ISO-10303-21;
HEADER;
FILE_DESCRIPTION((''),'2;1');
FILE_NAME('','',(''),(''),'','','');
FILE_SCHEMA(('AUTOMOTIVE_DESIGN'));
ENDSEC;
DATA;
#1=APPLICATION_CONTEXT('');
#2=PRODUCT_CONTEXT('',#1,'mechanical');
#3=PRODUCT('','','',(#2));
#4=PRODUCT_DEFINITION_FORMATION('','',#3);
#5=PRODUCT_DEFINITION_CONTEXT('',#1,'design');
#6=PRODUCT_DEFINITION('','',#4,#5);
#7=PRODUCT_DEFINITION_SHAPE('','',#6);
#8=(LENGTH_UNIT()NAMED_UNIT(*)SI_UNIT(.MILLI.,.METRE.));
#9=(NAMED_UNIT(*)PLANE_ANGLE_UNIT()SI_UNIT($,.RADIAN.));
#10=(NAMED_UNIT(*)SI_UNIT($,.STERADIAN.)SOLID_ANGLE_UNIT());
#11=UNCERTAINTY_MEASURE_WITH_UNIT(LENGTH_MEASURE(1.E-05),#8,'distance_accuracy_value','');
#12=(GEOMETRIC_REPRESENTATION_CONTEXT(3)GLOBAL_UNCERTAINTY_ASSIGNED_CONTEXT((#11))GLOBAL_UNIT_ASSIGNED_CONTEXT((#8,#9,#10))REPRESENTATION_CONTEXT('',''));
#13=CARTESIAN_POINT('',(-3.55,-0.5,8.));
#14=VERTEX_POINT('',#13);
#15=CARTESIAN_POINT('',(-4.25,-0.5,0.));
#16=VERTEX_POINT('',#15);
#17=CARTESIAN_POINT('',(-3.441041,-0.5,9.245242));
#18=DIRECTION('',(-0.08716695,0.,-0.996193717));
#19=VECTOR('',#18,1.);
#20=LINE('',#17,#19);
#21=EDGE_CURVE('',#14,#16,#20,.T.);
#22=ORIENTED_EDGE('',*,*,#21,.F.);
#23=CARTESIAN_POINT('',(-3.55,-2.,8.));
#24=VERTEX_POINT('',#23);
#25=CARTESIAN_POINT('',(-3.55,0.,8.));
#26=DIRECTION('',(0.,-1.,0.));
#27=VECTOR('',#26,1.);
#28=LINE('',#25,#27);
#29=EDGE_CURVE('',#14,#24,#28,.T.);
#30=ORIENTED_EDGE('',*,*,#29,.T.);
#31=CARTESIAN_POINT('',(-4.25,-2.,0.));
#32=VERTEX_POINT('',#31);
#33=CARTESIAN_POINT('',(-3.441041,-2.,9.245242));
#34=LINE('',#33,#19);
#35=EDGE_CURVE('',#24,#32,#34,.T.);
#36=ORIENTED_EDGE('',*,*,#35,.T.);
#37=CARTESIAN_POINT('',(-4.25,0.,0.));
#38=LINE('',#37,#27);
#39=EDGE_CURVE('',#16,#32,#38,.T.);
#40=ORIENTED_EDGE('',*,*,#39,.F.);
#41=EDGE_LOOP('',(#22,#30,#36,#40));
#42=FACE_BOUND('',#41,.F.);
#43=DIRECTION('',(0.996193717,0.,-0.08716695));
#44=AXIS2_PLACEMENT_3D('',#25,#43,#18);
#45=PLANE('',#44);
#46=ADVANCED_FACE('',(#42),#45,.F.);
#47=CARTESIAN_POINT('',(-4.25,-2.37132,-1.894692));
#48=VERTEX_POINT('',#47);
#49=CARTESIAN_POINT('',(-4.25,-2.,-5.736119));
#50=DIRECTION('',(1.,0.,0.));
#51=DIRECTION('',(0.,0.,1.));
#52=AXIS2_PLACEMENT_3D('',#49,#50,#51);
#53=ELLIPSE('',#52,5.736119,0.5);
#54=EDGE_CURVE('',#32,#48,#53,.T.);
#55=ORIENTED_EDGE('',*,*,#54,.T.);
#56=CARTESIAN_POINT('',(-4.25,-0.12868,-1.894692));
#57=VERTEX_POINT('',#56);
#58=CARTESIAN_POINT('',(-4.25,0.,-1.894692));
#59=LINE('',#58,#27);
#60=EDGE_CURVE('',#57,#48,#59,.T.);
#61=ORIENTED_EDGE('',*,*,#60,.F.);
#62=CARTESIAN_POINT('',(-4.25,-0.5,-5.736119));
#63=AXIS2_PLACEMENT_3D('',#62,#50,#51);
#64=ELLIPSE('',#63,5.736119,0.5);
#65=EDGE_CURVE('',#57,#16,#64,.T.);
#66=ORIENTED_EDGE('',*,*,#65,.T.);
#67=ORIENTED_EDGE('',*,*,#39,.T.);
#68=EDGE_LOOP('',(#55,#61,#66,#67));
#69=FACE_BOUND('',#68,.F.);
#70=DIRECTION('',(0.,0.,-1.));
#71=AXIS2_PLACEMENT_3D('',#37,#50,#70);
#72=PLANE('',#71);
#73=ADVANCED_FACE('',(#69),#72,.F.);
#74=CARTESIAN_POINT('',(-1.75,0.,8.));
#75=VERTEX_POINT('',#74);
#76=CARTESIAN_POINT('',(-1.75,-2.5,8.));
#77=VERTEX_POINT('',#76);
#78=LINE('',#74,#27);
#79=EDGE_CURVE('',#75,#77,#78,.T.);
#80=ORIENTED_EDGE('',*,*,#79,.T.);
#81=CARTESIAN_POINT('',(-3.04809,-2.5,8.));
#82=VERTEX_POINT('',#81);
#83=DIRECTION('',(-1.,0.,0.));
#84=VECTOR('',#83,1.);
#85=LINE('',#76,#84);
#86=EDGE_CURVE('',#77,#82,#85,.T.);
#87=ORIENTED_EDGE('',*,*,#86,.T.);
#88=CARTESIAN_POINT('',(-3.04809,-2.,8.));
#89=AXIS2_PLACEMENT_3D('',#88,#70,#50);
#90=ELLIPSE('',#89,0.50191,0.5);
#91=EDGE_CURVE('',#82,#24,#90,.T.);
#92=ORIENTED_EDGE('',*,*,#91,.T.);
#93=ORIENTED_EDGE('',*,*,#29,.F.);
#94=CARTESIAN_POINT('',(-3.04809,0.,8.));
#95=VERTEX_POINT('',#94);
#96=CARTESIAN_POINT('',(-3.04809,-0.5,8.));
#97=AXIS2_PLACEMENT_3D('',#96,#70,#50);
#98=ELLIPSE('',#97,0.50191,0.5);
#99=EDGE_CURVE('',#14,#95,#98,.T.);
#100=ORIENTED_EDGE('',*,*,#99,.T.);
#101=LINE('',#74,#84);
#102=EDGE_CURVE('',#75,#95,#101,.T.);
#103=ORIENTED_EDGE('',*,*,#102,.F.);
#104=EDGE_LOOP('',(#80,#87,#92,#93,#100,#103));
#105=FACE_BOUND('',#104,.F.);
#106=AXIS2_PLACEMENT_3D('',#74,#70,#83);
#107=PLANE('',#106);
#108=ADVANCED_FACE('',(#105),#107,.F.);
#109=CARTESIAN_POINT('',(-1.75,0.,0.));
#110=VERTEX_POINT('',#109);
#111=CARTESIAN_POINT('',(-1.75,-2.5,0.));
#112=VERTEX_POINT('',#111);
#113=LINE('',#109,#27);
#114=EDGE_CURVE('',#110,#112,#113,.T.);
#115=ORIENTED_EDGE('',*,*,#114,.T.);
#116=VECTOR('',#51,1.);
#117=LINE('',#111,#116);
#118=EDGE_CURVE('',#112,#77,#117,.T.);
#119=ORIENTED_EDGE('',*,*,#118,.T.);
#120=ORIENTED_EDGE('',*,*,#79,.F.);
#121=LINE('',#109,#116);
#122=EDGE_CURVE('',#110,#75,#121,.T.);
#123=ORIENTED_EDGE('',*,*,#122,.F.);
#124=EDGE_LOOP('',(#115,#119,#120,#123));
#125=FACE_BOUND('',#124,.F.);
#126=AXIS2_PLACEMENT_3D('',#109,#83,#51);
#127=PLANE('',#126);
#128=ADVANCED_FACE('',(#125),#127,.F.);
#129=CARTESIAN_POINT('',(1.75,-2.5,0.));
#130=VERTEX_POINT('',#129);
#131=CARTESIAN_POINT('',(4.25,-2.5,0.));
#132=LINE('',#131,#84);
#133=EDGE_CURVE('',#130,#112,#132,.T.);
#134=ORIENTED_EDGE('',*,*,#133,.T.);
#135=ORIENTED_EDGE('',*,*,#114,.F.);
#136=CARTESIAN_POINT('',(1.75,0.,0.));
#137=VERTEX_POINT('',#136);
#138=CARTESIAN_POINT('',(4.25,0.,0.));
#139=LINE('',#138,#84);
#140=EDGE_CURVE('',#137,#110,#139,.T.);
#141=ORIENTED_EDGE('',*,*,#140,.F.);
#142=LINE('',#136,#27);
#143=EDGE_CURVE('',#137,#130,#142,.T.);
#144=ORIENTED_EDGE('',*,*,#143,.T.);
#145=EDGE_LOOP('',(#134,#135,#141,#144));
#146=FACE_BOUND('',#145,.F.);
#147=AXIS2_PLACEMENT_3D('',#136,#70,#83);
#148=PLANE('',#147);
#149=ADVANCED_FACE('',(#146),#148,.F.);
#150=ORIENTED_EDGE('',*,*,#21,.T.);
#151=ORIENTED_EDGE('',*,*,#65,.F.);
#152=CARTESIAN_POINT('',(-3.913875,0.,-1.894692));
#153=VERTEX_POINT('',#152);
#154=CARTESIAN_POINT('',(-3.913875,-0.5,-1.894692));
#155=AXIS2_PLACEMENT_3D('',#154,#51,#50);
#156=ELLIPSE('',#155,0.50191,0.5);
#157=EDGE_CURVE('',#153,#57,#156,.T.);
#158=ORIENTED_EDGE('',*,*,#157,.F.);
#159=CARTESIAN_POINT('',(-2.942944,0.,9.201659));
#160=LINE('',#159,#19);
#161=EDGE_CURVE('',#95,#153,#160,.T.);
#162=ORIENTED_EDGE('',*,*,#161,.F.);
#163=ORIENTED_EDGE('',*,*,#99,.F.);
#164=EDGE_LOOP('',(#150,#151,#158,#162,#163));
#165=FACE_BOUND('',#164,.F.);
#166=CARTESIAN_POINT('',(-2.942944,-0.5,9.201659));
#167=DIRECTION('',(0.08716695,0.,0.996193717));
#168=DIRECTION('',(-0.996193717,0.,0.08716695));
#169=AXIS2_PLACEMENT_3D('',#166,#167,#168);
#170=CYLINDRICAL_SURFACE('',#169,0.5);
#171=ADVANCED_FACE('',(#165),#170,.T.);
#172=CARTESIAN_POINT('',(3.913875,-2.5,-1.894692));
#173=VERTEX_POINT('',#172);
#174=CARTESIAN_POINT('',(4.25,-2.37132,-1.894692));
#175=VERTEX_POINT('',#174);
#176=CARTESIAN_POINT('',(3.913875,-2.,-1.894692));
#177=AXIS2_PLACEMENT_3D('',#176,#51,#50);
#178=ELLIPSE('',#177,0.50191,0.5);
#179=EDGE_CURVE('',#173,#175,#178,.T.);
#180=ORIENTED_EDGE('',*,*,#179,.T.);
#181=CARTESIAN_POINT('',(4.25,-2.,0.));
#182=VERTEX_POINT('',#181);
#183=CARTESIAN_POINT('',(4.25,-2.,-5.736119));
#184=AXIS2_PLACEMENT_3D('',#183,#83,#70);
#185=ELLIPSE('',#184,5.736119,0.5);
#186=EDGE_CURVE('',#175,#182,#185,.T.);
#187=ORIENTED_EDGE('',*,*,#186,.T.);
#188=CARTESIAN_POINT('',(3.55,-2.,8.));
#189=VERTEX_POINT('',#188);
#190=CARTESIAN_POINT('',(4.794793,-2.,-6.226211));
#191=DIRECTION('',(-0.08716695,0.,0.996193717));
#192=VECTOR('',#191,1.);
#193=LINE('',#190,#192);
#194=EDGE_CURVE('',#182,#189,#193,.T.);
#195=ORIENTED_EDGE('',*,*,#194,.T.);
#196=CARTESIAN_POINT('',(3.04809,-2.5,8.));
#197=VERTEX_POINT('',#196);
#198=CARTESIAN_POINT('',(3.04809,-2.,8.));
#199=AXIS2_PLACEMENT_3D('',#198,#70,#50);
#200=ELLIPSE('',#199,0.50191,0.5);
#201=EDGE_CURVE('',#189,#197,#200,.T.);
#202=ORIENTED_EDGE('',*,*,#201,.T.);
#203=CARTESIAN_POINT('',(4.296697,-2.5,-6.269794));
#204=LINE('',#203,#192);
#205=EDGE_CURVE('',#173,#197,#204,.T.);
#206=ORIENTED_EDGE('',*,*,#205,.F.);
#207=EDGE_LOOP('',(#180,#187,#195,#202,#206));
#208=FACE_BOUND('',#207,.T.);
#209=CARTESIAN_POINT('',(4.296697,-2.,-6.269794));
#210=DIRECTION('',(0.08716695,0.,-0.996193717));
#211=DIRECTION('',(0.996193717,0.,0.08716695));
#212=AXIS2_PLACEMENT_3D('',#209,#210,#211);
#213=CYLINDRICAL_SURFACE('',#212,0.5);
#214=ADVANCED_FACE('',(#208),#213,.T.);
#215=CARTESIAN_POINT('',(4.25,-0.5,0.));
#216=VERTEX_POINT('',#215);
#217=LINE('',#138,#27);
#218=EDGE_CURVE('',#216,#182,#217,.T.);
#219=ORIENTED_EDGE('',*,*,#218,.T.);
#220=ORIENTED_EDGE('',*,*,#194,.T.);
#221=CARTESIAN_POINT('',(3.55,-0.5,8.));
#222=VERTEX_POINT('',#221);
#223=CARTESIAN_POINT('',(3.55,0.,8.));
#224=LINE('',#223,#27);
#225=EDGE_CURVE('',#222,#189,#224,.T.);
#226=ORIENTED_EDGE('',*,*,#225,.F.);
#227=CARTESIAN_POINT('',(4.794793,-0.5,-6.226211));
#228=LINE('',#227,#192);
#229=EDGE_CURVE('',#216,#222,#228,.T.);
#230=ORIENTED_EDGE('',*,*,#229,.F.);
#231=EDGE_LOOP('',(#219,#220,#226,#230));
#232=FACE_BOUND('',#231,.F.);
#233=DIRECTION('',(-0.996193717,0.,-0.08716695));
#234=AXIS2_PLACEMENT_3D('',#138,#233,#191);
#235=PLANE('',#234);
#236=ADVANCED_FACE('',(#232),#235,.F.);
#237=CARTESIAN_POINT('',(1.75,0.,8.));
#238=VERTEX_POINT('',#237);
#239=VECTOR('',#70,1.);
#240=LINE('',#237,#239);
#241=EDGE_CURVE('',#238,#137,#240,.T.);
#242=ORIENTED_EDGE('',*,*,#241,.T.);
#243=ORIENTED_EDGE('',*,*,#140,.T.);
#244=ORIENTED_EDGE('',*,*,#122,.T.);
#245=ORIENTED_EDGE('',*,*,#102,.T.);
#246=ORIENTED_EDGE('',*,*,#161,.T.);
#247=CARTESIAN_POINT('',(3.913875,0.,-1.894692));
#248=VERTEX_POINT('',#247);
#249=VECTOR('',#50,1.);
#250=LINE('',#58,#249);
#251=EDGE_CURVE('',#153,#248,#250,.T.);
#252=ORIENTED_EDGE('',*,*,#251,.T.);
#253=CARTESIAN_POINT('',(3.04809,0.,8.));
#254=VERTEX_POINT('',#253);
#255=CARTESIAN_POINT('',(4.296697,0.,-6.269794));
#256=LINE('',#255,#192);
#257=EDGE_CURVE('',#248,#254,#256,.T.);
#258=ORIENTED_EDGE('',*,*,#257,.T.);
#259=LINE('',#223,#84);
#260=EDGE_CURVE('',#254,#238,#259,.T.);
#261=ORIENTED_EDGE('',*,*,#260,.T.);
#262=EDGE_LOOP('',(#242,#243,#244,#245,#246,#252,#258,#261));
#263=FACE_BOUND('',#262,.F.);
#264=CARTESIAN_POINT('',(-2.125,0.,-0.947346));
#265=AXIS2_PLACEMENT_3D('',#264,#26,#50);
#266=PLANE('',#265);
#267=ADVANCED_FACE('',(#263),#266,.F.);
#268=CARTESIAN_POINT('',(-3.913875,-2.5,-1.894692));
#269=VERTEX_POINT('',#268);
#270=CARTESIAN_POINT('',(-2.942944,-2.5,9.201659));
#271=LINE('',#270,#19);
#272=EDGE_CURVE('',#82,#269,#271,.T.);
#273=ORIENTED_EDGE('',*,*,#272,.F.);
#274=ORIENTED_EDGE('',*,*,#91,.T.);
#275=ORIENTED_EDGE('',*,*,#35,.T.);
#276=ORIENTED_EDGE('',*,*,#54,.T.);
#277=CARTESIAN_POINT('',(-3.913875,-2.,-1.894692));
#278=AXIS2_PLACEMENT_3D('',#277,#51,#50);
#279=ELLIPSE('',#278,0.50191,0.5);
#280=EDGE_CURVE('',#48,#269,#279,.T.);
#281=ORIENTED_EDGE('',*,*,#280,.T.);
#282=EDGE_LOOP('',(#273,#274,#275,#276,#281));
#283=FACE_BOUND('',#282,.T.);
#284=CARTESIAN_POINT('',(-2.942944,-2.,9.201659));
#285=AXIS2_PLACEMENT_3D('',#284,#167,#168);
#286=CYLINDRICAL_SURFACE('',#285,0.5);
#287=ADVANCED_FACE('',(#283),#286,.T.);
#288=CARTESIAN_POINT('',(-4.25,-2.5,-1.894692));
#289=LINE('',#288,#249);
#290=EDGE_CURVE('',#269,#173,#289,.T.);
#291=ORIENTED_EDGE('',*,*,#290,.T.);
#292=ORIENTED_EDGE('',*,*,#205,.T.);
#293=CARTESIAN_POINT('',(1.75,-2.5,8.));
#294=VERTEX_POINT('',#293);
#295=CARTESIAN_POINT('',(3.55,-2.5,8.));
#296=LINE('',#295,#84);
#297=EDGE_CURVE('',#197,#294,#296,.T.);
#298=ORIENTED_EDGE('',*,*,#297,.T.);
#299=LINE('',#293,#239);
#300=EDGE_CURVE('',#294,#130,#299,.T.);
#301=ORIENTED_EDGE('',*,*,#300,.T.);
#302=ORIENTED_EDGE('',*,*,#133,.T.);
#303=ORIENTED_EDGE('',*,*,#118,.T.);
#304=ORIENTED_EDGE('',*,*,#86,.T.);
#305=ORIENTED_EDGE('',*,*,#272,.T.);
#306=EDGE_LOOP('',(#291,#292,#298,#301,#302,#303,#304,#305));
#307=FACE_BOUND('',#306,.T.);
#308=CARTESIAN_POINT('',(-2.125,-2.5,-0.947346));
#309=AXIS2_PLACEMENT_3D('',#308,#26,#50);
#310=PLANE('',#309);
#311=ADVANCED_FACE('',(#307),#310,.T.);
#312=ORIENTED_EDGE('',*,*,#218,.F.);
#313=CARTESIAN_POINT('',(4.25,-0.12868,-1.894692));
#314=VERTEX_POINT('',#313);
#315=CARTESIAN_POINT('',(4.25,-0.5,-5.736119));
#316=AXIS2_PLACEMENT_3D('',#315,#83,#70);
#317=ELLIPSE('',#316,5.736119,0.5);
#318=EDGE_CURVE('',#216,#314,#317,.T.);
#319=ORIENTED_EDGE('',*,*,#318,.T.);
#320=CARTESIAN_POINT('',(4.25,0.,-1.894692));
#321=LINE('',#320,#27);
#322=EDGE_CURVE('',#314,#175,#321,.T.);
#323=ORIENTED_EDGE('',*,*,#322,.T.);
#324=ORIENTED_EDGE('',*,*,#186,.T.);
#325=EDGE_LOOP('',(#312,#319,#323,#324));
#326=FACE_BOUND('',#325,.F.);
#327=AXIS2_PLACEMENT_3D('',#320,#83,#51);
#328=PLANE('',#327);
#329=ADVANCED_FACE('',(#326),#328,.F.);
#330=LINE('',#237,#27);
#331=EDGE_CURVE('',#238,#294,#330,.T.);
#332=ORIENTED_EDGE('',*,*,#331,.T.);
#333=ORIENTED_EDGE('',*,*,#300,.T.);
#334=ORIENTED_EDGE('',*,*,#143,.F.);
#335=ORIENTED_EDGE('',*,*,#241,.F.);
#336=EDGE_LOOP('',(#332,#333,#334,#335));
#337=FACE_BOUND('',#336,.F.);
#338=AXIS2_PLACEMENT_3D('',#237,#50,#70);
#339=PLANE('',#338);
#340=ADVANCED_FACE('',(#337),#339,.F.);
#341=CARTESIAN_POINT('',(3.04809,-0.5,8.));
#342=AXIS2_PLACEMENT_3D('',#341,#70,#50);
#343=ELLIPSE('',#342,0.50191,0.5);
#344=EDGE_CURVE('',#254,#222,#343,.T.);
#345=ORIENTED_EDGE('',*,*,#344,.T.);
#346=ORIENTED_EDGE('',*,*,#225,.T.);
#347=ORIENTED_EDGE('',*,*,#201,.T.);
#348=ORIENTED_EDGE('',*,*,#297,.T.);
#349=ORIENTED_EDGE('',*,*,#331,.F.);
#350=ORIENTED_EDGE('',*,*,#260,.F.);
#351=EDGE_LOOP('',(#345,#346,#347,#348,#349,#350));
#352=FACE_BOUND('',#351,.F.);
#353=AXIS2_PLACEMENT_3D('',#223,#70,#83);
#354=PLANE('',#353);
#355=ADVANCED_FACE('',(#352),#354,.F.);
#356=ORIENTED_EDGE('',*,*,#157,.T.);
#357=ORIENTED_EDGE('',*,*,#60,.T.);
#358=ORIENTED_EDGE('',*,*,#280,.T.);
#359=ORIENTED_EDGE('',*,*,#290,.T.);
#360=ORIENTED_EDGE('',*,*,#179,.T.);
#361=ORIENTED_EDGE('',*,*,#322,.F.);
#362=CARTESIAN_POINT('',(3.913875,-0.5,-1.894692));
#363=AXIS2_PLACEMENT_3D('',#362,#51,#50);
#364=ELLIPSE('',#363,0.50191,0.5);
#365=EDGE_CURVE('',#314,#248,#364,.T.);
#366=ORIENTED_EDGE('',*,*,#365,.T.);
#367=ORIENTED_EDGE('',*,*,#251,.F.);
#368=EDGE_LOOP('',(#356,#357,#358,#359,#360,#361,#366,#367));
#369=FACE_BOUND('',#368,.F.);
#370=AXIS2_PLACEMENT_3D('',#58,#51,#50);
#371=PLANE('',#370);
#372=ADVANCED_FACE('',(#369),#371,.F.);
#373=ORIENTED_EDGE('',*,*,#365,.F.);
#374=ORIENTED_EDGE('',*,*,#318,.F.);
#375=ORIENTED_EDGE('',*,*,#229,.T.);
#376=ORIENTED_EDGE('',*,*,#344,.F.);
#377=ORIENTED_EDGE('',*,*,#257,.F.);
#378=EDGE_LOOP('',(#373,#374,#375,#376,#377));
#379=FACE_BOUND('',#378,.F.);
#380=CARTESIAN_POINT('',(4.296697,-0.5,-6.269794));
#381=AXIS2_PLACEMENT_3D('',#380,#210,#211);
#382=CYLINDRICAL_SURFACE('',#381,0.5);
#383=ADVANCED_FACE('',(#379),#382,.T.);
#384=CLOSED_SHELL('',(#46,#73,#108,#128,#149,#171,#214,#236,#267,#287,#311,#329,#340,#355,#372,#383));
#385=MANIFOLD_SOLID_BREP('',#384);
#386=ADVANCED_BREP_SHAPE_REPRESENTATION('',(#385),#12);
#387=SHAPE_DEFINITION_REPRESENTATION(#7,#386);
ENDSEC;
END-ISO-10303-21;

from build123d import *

# Parameters (mm, degrees)
F1_DEPTH    = 2.5
F2_T1_DEPTH = 15.5305666052
F2_T3_DEPTH = 15.5305666052


# Not quite as in the source:
# - a fillet or chamfer that OpenCascade refuses, or shapes differently, is made with other operations: its cross-section is extruded or revolved along the edge and cut away or added


with BuildPart() as f1:
    # F0 (on Front) → F1 (new body)
    with BuildSketch(Plane.XZ):
        Polygon((0, -1.894692351), (0, 0), (-1.75, 0), (-4.25, 0), (-4.25, -1.894692351), align=None)
        Polygon((1.75, 0), (0, 0), (0, -1.894692351), (4.25, -1.894692351), (4.25, 0), align=None)
        Polygon((-4.25, 0), (-1.75, 0), (-1.75, 8), (-3.55, 8), align=None)
        Polygon((1.75, 8), (1.75, 0), (4.25, 0), (3.55, 8), align=None)
    extrude(amount=F1_DEPTH)

    # F2: fillet of radius 0.5 on 4 edges, made by hand

    # F2_s2 → F2_t1 (cut)
    with BuildSketch(Plane(origin=(0.5770852674, 0, -6.5952601994), x_dir=(0, 1, 0), z_dir=(-0.0871669503, 0, 0.9961937175))):
        with BuildLine():
            ThreePointArc((-2, -4.2338232994), (-2.3535533906, -4.08737669), (-2.5, -3.7338232994))
            Line((-2.5, -3.7338232994), (-2.5, -4.2338232994))
            Line((-2.5, -4.2338232994), (-2, -4.2338232994))
        make_face()
        with BuildLine():
            ThreePointArc((-0.5, -4.2338232994), (-0.1464466094, -4.08737669), (0, -3.7338232994))
            Line((0, -3.7338232994), (0, -4.2338232994))
            Line((0, -4.2338232994), (-0.5, -4.2338232994))
        make_face()
    extrude(amount=F2_T1_DEPTH, mode=Mode.SUBTRACT)

    # F2_s4 → F2_t3 (cut)
    with BuildSketch(Plane(origin=(0.7766668597, 0, 8.8761926818), x_dir=(0, 1, 0), z_dir=(-0.0871669503, 0, -0.9961937175))):
        with BuildLine():
            ThreePointArc((-2, -4.2338232994), (-2.3535533906, -4.08737669), (-2.5, -3.7338232994))
            Line((-2.5, -3.7338232994), (-2.5, -4.2338232994))
            Line((-2.5, -4.2338232994), (-2, -4.2338232994))
        make_face()
        with BuildLine():
            ThreePointArc((-0.5, -4.2338232994), (-0.1464466094, -4.08737669), (0, -3.7338232994))
            Line((0, -3.7338232994), (0, -4.2338232994))
            Line((0, -4.2338232994), (-0.5, -4.2338232994))
        make_face()
    extrude(amount=F2_T3_DEPTH, mode=Mode.SUBTRACT)


solid = f1.part
